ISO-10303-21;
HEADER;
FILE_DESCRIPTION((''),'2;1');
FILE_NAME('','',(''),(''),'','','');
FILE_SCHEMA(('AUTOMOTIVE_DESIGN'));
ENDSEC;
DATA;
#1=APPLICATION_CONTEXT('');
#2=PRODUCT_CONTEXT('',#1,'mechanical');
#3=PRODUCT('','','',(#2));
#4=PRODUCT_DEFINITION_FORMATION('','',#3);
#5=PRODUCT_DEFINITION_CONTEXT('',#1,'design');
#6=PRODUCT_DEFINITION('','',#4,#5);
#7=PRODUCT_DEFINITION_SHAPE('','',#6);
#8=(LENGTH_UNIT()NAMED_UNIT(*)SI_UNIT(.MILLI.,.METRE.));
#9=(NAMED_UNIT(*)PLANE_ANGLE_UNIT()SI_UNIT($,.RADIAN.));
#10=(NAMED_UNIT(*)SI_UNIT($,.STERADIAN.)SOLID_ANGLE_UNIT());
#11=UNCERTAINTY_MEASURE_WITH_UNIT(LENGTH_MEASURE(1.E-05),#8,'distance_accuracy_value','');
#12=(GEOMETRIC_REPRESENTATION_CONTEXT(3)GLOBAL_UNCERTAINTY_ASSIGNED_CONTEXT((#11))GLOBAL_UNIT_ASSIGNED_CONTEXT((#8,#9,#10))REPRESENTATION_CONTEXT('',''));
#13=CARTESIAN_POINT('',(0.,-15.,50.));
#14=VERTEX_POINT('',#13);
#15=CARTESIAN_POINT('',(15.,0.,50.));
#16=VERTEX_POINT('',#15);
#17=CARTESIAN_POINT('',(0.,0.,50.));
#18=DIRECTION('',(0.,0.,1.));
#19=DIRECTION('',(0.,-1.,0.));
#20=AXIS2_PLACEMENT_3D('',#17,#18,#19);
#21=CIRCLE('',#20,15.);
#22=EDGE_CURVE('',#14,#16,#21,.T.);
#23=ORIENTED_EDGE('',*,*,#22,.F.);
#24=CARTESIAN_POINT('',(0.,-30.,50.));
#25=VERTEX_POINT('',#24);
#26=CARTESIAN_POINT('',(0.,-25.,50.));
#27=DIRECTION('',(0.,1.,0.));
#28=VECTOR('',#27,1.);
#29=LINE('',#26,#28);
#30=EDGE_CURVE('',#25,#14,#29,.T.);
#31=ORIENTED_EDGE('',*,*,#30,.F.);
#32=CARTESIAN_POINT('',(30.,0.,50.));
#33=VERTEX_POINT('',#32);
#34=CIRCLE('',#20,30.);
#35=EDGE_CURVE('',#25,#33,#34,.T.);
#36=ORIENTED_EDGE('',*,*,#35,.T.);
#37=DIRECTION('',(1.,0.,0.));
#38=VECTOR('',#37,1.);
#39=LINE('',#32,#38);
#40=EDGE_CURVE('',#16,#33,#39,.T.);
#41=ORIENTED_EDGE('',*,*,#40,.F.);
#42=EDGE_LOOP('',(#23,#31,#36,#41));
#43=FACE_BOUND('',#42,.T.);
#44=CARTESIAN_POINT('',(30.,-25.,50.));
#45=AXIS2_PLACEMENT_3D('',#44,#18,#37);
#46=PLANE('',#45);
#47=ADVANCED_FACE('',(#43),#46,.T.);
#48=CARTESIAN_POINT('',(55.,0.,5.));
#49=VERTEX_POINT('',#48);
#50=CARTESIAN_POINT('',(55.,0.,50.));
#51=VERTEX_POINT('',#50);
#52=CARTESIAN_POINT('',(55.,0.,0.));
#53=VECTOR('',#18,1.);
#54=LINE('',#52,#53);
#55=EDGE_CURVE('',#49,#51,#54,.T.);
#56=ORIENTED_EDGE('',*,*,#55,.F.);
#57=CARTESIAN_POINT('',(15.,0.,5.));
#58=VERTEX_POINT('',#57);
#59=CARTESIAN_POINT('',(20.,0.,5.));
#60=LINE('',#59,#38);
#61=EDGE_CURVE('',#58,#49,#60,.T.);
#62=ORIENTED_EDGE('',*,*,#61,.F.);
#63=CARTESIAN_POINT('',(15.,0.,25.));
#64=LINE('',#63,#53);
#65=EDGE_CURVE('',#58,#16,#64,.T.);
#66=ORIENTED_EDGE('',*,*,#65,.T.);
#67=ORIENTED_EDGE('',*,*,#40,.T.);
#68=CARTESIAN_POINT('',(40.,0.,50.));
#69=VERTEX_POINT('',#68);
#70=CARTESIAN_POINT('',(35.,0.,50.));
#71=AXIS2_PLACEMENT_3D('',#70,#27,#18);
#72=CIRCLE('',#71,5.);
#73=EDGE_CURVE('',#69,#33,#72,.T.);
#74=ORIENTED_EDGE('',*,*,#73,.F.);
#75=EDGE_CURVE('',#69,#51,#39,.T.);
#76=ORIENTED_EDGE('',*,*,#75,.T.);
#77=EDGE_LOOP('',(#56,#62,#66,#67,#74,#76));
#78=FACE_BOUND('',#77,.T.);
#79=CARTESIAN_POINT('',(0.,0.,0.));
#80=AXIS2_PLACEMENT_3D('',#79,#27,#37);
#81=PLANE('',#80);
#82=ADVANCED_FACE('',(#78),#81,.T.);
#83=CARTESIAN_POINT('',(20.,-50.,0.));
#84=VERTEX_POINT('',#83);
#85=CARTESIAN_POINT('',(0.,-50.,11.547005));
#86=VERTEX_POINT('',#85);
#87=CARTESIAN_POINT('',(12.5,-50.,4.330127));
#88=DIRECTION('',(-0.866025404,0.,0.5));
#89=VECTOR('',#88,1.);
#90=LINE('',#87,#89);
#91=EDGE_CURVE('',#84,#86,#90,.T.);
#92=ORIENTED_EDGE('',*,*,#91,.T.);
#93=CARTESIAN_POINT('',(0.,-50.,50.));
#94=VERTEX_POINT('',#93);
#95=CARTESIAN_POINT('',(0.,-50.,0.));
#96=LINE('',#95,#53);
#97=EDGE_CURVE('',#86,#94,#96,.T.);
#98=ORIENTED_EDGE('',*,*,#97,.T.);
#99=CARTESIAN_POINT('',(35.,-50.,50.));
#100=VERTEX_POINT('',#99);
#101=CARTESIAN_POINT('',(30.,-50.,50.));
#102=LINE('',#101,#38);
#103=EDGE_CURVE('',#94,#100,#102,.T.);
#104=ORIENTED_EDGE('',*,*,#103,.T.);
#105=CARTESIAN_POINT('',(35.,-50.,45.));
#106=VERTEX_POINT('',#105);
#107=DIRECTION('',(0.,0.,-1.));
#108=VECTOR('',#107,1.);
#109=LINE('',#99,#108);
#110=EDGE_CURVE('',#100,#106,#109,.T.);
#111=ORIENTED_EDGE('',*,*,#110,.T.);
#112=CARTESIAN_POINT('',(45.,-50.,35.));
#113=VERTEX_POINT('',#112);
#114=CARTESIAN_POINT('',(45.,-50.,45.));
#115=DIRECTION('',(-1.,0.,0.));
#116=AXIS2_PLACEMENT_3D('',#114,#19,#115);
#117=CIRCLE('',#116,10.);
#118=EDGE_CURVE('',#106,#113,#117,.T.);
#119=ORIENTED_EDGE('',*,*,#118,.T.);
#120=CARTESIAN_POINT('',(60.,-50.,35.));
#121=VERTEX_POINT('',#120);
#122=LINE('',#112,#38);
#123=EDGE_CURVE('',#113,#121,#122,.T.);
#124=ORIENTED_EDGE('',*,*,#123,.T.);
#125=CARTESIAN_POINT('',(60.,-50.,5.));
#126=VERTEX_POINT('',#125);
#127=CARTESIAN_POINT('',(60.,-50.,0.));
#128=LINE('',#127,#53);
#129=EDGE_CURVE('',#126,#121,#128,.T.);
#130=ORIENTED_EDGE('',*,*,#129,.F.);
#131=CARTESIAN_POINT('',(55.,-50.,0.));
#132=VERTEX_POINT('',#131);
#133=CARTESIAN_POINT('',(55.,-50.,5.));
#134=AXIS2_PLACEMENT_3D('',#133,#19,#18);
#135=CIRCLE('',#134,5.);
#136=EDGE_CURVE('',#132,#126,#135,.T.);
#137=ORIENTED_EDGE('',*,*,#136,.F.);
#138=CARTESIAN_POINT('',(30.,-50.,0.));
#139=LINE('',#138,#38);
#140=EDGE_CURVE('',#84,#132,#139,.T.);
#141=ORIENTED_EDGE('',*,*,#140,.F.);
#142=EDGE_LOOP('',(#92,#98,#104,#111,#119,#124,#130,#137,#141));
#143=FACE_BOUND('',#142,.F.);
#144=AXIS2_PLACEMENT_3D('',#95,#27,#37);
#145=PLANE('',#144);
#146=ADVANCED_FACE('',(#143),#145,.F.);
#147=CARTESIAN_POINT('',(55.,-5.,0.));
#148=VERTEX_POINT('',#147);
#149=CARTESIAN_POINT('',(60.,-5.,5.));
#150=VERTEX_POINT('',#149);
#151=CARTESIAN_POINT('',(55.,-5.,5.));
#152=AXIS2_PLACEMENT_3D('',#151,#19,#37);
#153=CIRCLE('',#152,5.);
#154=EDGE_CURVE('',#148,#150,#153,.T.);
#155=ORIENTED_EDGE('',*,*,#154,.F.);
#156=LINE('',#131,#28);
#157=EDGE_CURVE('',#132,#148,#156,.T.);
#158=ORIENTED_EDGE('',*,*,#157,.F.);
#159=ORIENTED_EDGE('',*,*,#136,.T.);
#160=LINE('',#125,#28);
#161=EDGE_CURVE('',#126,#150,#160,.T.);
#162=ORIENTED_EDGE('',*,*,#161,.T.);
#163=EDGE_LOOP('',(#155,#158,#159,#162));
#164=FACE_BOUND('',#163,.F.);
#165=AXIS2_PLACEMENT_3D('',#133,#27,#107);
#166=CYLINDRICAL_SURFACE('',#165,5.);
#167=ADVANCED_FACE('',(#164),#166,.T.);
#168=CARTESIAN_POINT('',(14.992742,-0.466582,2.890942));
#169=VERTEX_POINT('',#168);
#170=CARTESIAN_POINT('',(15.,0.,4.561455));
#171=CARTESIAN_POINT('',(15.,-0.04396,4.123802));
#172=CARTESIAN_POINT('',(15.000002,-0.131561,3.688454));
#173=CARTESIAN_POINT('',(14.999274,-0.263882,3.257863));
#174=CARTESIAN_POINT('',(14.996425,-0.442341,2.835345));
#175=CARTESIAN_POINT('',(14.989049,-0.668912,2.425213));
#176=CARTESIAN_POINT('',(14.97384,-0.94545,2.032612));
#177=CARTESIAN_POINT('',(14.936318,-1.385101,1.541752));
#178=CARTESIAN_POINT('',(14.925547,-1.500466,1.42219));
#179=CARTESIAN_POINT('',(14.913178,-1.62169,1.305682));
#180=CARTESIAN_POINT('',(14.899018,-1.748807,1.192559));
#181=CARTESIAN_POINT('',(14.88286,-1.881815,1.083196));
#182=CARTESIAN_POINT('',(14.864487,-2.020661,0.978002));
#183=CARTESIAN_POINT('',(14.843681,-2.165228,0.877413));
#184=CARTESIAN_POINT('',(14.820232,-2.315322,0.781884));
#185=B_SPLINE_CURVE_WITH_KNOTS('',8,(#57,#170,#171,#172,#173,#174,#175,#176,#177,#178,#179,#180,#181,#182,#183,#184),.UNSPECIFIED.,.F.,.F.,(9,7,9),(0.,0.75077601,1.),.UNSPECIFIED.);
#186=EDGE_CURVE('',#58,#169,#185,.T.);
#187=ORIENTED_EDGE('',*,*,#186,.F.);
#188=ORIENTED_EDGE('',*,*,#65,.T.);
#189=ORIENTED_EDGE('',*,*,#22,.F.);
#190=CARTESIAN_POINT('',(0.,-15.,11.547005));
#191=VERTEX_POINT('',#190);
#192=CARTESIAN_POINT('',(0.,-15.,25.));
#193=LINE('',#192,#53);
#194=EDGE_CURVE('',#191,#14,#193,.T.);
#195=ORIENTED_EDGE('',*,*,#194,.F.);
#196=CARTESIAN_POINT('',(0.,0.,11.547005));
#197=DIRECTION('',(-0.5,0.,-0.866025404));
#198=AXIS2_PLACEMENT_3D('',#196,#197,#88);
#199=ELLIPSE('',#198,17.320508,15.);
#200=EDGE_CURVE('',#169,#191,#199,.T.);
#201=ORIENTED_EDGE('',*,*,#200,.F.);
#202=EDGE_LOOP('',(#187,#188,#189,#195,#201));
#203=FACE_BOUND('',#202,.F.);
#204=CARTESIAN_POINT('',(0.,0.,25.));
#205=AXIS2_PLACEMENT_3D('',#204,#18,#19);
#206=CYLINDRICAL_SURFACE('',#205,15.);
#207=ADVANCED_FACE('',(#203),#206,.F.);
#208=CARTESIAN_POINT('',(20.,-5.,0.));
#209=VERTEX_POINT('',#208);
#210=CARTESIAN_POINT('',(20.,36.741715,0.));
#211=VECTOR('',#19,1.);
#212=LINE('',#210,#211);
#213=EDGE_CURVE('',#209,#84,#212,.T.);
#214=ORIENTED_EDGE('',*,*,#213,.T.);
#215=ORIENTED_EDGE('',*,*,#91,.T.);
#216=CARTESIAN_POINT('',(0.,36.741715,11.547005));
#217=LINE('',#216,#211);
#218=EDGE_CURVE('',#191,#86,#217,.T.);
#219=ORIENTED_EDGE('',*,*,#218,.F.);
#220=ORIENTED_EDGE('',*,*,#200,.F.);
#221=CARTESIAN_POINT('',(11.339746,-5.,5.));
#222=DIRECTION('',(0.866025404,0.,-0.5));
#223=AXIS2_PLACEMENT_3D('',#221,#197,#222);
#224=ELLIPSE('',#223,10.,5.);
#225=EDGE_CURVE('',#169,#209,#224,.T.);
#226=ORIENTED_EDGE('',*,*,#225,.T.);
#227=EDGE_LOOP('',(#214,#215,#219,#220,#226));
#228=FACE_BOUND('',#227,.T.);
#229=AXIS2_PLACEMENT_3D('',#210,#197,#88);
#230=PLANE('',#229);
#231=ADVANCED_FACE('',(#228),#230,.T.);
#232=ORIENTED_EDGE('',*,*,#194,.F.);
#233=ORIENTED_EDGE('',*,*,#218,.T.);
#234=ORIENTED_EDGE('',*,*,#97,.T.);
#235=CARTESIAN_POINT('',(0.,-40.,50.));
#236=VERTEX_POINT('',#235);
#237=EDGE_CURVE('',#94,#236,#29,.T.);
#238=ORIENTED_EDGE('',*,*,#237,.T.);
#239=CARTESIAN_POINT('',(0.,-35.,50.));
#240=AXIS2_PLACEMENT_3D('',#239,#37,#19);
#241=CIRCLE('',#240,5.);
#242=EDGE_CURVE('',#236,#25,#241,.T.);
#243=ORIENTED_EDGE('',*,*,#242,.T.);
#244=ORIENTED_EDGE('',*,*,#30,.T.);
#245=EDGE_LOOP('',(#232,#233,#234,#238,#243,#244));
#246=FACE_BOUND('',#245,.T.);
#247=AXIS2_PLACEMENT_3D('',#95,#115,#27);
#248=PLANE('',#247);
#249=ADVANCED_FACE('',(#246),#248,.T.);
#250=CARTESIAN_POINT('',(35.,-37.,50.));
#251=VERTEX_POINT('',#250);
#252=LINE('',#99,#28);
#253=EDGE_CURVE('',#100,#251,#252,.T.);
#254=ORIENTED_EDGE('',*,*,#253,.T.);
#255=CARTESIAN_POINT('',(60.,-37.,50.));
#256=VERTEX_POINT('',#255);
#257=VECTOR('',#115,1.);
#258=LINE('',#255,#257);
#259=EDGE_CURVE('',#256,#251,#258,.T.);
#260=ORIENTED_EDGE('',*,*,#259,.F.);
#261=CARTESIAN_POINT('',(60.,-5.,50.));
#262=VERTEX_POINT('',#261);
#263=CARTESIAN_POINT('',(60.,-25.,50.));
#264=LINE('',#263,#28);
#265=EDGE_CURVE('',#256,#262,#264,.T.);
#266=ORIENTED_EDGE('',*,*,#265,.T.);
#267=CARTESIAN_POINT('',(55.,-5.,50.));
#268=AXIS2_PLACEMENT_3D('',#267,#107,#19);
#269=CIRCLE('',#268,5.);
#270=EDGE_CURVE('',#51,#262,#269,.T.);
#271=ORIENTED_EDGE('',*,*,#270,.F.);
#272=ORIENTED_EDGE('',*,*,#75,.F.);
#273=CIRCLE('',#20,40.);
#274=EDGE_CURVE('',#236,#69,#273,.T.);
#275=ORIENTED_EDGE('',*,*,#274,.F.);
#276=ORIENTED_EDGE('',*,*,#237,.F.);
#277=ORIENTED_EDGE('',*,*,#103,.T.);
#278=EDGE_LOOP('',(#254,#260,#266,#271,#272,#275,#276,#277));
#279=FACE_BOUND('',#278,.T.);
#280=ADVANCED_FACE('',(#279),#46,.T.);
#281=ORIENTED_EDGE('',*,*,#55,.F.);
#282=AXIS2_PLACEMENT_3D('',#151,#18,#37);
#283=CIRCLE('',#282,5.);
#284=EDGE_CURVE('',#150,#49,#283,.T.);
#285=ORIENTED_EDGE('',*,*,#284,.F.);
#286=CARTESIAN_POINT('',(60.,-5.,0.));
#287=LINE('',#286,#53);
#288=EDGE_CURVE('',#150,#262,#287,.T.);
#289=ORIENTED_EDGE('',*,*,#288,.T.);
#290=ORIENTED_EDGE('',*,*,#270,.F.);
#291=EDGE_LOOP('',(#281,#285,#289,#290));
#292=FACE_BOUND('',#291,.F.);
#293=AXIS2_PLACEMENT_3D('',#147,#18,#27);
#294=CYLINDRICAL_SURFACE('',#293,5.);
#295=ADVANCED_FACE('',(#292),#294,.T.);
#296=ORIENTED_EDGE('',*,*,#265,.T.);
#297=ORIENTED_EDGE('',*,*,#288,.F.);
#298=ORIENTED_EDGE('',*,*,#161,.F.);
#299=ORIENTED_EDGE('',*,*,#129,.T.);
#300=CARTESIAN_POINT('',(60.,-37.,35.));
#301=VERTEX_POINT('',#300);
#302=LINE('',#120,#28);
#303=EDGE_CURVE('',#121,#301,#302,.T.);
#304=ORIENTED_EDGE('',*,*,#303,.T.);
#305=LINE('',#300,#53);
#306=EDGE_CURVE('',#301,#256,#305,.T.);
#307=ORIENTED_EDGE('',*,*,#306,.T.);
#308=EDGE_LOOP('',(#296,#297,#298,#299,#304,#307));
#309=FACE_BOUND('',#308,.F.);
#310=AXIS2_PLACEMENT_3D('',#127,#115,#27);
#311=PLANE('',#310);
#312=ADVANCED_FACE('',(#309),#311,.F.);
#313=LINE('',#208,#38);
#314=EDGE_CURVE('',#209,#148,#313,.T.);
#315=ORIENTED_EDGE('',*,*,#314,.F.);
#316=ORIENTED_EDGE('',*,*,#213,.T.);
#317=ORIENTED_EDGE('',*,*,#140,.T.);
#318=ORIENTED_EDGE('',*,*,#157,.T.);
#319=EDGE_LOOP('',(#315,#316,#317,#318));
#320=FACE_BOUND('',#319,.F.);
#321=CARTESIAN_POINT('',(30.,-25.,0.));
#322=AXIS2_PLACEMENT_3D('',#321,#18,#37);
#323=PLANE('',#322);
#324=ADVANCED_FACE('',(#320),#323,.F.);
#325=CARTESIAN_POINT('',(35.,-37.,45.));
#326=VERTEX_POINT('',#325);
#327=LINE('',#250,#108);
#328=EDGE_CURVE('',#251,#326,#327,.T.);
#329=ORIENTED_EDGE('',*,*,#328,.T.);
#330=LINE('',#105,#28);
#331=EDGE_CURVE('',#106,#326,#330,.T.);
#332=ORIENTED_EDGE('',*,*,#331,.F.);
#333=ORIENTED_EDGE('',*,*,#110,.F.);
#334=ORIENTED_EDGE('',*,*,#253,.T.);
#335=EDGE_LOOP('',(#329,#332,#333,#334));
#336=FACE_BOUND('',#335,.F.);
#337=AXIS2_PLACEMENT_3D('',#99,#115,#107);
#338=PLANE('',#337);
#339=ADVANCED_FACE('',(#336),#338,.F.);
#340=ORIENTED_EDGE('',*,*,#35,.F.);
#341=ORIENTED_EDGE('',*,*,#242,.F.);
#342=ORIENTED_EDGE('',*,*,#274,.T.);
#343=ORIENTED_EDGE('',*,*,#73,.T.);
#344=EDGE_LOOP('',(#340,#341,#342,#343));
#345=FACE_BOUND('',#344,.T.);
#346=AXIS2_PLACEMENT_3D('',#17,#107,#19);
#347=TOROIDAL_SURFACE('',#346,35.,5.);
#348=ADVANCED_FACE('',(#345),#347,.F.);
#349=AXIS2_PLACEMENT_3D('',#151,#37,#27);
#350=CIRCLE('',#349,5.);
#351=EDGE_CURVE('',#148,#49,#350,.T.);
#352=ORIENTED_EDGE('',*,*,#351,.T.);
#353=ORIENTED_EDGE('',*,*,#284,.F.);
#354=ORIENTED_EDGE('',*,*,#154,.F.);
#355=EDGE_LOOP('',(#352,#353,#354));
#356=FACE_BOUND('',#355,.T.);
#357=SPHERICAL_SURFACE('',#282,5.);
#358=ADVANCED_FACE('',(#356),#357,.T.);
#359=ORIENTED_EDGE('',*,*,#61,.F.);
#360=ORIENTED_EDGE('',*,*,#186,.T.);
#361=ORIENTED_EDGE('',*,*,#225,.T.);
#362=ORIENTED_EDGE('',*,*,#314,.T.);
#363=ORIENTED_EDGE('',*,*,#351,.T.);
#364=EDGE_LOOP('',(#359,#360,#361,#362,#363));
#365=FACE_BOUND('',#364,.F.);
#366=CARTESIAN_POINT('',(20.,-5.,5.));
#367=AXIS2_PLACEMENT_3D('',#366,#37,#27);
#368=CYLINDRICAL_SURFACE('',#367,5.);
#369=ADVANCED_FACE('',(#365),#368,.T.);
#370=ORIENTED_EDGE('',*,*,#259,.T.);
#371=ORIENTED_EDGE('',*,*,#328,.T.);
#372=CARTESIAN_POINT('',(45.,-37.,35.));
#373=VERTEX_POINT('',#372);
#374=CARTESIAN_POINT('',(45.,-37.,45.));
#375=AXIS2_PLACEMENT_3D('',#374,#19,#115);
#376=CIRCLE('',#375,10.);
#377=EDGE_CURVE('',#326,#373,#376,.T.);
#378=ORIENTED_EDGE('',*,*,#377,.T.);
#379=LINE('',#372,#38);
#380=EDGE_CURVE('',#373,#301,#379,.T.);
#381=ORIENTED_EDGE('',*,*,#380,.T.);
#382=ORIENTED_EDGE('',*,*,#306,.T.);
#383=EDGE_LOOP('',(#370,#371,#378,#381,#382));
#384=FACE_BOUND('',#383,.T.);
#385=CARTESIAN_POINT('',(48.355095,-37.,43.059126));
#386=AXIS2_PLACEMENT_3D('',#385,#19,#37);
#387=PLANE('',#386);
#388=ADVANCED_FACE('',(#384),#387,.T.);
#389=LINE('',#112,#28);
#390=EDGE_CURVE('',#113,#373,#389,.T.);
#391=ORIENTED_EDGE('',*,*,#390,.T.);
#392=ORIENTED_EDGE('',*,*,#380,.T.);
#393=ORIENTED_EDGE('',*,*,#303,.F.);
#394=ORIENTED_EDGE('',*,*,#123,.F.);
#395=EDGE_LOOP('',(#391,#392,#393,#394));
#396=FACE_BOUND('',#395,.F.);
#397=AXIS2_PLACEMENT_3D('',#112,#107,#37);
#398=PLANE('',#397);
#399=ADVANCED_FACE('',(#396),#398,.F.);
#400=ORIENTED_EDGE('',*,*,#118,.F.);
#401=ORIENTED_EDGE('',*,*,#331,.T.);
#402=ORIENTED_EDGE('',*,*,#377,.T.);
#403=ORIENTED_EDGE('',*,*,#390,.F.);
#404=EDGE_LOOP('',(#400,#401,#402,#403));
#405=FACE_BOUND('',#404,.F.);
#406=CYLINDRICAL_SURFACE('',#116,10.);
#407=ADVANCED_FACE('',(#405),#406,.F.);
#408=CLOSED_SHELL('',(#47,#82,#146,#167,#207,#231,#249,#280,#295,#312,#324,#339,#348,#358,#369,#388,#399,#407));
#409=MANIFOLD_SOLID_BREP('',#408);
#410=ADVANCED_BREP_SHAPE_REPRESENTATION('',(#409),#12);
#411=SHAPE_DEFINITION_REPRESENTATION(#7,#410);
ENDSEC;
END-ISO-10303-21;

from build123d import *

# Parameters (mm, degrees)
F0_W        = 60
F0_H        = 50
F1_DEPTH    = 50
F2_W        = 15
F2_H        = 50
F5_DEPTH    = 13
F6_T1_DEPTH = 138.4834301858
F7_R        = 5


# Not quite as in the source:
# - a fillet or chamfer that OpenCascade refuses, or shapes differently, is made with other operations: its cross-section is extruded or revolved along the edge and cut away or added


with BuildPart() as f1:
    # F0 (on Top) → F1 (new body)
    with BuildSketch(Plane.XY):
        with Locations((30, -25)):
            Rectangle(F0_W, F0_H)
    extrude(amount=F1_DEPTH)

    # F2 (on Right) → F3 (revolve, cut)
    with BuildSketch(Plane.YZ):
        with Locations((-7.5, 25)):
            Rectangle(F2_W, F2_H)
        with BuildLine():
            Line((-30, 50), (-40, 50))
            ThreePointArc((-40, 50), (-35, 45), (-30, 50))
        make_face()
    revolve(axis=Axis((0, 0, 25), (0, 0, 1)), mode=Mode.SUBTRACT)

    # F4 (on face) → F5 (cut)
    with BuildSketch(Plane.XZ.offset(50)):
        with BuildLine():
            Line((60, 50), (35, 50))
            Line((35, 50), (35, 45))
            ThreePointArc((35, 45), (37.9289321881, 37.9289321881), (45, 35))
            Line((45, 35), (60, 35))
            Line((60, 35), (60, 50))
        make_face()
    extrude(amount=-F5_DEPTH, mode=Mode.SUBTRACT)

    # F6: chamfer of 20 x 11.5470053838 on 1 edges, made by hand

    # F6_s2 → F6_t1 (cut)
    with BuildSketch(Plane.XZ.offset(-36.7417150929)):
        Polygon((20, 0), (0, 11.5470053838), (0, 0), align=None)
    extrude(amount=F6_T1_DEPTH, mode=Mode.SUBTRACT)

    # F7
    f7_edges = [f1.edges().sort_by_distance(p)[0] for p in [
        (60, 0, 25),
        (60, -25, 0),
        (40, 0, 0),
    ]]
    fillet(f7_edges, radius=F7_R)


solid = f1.part
